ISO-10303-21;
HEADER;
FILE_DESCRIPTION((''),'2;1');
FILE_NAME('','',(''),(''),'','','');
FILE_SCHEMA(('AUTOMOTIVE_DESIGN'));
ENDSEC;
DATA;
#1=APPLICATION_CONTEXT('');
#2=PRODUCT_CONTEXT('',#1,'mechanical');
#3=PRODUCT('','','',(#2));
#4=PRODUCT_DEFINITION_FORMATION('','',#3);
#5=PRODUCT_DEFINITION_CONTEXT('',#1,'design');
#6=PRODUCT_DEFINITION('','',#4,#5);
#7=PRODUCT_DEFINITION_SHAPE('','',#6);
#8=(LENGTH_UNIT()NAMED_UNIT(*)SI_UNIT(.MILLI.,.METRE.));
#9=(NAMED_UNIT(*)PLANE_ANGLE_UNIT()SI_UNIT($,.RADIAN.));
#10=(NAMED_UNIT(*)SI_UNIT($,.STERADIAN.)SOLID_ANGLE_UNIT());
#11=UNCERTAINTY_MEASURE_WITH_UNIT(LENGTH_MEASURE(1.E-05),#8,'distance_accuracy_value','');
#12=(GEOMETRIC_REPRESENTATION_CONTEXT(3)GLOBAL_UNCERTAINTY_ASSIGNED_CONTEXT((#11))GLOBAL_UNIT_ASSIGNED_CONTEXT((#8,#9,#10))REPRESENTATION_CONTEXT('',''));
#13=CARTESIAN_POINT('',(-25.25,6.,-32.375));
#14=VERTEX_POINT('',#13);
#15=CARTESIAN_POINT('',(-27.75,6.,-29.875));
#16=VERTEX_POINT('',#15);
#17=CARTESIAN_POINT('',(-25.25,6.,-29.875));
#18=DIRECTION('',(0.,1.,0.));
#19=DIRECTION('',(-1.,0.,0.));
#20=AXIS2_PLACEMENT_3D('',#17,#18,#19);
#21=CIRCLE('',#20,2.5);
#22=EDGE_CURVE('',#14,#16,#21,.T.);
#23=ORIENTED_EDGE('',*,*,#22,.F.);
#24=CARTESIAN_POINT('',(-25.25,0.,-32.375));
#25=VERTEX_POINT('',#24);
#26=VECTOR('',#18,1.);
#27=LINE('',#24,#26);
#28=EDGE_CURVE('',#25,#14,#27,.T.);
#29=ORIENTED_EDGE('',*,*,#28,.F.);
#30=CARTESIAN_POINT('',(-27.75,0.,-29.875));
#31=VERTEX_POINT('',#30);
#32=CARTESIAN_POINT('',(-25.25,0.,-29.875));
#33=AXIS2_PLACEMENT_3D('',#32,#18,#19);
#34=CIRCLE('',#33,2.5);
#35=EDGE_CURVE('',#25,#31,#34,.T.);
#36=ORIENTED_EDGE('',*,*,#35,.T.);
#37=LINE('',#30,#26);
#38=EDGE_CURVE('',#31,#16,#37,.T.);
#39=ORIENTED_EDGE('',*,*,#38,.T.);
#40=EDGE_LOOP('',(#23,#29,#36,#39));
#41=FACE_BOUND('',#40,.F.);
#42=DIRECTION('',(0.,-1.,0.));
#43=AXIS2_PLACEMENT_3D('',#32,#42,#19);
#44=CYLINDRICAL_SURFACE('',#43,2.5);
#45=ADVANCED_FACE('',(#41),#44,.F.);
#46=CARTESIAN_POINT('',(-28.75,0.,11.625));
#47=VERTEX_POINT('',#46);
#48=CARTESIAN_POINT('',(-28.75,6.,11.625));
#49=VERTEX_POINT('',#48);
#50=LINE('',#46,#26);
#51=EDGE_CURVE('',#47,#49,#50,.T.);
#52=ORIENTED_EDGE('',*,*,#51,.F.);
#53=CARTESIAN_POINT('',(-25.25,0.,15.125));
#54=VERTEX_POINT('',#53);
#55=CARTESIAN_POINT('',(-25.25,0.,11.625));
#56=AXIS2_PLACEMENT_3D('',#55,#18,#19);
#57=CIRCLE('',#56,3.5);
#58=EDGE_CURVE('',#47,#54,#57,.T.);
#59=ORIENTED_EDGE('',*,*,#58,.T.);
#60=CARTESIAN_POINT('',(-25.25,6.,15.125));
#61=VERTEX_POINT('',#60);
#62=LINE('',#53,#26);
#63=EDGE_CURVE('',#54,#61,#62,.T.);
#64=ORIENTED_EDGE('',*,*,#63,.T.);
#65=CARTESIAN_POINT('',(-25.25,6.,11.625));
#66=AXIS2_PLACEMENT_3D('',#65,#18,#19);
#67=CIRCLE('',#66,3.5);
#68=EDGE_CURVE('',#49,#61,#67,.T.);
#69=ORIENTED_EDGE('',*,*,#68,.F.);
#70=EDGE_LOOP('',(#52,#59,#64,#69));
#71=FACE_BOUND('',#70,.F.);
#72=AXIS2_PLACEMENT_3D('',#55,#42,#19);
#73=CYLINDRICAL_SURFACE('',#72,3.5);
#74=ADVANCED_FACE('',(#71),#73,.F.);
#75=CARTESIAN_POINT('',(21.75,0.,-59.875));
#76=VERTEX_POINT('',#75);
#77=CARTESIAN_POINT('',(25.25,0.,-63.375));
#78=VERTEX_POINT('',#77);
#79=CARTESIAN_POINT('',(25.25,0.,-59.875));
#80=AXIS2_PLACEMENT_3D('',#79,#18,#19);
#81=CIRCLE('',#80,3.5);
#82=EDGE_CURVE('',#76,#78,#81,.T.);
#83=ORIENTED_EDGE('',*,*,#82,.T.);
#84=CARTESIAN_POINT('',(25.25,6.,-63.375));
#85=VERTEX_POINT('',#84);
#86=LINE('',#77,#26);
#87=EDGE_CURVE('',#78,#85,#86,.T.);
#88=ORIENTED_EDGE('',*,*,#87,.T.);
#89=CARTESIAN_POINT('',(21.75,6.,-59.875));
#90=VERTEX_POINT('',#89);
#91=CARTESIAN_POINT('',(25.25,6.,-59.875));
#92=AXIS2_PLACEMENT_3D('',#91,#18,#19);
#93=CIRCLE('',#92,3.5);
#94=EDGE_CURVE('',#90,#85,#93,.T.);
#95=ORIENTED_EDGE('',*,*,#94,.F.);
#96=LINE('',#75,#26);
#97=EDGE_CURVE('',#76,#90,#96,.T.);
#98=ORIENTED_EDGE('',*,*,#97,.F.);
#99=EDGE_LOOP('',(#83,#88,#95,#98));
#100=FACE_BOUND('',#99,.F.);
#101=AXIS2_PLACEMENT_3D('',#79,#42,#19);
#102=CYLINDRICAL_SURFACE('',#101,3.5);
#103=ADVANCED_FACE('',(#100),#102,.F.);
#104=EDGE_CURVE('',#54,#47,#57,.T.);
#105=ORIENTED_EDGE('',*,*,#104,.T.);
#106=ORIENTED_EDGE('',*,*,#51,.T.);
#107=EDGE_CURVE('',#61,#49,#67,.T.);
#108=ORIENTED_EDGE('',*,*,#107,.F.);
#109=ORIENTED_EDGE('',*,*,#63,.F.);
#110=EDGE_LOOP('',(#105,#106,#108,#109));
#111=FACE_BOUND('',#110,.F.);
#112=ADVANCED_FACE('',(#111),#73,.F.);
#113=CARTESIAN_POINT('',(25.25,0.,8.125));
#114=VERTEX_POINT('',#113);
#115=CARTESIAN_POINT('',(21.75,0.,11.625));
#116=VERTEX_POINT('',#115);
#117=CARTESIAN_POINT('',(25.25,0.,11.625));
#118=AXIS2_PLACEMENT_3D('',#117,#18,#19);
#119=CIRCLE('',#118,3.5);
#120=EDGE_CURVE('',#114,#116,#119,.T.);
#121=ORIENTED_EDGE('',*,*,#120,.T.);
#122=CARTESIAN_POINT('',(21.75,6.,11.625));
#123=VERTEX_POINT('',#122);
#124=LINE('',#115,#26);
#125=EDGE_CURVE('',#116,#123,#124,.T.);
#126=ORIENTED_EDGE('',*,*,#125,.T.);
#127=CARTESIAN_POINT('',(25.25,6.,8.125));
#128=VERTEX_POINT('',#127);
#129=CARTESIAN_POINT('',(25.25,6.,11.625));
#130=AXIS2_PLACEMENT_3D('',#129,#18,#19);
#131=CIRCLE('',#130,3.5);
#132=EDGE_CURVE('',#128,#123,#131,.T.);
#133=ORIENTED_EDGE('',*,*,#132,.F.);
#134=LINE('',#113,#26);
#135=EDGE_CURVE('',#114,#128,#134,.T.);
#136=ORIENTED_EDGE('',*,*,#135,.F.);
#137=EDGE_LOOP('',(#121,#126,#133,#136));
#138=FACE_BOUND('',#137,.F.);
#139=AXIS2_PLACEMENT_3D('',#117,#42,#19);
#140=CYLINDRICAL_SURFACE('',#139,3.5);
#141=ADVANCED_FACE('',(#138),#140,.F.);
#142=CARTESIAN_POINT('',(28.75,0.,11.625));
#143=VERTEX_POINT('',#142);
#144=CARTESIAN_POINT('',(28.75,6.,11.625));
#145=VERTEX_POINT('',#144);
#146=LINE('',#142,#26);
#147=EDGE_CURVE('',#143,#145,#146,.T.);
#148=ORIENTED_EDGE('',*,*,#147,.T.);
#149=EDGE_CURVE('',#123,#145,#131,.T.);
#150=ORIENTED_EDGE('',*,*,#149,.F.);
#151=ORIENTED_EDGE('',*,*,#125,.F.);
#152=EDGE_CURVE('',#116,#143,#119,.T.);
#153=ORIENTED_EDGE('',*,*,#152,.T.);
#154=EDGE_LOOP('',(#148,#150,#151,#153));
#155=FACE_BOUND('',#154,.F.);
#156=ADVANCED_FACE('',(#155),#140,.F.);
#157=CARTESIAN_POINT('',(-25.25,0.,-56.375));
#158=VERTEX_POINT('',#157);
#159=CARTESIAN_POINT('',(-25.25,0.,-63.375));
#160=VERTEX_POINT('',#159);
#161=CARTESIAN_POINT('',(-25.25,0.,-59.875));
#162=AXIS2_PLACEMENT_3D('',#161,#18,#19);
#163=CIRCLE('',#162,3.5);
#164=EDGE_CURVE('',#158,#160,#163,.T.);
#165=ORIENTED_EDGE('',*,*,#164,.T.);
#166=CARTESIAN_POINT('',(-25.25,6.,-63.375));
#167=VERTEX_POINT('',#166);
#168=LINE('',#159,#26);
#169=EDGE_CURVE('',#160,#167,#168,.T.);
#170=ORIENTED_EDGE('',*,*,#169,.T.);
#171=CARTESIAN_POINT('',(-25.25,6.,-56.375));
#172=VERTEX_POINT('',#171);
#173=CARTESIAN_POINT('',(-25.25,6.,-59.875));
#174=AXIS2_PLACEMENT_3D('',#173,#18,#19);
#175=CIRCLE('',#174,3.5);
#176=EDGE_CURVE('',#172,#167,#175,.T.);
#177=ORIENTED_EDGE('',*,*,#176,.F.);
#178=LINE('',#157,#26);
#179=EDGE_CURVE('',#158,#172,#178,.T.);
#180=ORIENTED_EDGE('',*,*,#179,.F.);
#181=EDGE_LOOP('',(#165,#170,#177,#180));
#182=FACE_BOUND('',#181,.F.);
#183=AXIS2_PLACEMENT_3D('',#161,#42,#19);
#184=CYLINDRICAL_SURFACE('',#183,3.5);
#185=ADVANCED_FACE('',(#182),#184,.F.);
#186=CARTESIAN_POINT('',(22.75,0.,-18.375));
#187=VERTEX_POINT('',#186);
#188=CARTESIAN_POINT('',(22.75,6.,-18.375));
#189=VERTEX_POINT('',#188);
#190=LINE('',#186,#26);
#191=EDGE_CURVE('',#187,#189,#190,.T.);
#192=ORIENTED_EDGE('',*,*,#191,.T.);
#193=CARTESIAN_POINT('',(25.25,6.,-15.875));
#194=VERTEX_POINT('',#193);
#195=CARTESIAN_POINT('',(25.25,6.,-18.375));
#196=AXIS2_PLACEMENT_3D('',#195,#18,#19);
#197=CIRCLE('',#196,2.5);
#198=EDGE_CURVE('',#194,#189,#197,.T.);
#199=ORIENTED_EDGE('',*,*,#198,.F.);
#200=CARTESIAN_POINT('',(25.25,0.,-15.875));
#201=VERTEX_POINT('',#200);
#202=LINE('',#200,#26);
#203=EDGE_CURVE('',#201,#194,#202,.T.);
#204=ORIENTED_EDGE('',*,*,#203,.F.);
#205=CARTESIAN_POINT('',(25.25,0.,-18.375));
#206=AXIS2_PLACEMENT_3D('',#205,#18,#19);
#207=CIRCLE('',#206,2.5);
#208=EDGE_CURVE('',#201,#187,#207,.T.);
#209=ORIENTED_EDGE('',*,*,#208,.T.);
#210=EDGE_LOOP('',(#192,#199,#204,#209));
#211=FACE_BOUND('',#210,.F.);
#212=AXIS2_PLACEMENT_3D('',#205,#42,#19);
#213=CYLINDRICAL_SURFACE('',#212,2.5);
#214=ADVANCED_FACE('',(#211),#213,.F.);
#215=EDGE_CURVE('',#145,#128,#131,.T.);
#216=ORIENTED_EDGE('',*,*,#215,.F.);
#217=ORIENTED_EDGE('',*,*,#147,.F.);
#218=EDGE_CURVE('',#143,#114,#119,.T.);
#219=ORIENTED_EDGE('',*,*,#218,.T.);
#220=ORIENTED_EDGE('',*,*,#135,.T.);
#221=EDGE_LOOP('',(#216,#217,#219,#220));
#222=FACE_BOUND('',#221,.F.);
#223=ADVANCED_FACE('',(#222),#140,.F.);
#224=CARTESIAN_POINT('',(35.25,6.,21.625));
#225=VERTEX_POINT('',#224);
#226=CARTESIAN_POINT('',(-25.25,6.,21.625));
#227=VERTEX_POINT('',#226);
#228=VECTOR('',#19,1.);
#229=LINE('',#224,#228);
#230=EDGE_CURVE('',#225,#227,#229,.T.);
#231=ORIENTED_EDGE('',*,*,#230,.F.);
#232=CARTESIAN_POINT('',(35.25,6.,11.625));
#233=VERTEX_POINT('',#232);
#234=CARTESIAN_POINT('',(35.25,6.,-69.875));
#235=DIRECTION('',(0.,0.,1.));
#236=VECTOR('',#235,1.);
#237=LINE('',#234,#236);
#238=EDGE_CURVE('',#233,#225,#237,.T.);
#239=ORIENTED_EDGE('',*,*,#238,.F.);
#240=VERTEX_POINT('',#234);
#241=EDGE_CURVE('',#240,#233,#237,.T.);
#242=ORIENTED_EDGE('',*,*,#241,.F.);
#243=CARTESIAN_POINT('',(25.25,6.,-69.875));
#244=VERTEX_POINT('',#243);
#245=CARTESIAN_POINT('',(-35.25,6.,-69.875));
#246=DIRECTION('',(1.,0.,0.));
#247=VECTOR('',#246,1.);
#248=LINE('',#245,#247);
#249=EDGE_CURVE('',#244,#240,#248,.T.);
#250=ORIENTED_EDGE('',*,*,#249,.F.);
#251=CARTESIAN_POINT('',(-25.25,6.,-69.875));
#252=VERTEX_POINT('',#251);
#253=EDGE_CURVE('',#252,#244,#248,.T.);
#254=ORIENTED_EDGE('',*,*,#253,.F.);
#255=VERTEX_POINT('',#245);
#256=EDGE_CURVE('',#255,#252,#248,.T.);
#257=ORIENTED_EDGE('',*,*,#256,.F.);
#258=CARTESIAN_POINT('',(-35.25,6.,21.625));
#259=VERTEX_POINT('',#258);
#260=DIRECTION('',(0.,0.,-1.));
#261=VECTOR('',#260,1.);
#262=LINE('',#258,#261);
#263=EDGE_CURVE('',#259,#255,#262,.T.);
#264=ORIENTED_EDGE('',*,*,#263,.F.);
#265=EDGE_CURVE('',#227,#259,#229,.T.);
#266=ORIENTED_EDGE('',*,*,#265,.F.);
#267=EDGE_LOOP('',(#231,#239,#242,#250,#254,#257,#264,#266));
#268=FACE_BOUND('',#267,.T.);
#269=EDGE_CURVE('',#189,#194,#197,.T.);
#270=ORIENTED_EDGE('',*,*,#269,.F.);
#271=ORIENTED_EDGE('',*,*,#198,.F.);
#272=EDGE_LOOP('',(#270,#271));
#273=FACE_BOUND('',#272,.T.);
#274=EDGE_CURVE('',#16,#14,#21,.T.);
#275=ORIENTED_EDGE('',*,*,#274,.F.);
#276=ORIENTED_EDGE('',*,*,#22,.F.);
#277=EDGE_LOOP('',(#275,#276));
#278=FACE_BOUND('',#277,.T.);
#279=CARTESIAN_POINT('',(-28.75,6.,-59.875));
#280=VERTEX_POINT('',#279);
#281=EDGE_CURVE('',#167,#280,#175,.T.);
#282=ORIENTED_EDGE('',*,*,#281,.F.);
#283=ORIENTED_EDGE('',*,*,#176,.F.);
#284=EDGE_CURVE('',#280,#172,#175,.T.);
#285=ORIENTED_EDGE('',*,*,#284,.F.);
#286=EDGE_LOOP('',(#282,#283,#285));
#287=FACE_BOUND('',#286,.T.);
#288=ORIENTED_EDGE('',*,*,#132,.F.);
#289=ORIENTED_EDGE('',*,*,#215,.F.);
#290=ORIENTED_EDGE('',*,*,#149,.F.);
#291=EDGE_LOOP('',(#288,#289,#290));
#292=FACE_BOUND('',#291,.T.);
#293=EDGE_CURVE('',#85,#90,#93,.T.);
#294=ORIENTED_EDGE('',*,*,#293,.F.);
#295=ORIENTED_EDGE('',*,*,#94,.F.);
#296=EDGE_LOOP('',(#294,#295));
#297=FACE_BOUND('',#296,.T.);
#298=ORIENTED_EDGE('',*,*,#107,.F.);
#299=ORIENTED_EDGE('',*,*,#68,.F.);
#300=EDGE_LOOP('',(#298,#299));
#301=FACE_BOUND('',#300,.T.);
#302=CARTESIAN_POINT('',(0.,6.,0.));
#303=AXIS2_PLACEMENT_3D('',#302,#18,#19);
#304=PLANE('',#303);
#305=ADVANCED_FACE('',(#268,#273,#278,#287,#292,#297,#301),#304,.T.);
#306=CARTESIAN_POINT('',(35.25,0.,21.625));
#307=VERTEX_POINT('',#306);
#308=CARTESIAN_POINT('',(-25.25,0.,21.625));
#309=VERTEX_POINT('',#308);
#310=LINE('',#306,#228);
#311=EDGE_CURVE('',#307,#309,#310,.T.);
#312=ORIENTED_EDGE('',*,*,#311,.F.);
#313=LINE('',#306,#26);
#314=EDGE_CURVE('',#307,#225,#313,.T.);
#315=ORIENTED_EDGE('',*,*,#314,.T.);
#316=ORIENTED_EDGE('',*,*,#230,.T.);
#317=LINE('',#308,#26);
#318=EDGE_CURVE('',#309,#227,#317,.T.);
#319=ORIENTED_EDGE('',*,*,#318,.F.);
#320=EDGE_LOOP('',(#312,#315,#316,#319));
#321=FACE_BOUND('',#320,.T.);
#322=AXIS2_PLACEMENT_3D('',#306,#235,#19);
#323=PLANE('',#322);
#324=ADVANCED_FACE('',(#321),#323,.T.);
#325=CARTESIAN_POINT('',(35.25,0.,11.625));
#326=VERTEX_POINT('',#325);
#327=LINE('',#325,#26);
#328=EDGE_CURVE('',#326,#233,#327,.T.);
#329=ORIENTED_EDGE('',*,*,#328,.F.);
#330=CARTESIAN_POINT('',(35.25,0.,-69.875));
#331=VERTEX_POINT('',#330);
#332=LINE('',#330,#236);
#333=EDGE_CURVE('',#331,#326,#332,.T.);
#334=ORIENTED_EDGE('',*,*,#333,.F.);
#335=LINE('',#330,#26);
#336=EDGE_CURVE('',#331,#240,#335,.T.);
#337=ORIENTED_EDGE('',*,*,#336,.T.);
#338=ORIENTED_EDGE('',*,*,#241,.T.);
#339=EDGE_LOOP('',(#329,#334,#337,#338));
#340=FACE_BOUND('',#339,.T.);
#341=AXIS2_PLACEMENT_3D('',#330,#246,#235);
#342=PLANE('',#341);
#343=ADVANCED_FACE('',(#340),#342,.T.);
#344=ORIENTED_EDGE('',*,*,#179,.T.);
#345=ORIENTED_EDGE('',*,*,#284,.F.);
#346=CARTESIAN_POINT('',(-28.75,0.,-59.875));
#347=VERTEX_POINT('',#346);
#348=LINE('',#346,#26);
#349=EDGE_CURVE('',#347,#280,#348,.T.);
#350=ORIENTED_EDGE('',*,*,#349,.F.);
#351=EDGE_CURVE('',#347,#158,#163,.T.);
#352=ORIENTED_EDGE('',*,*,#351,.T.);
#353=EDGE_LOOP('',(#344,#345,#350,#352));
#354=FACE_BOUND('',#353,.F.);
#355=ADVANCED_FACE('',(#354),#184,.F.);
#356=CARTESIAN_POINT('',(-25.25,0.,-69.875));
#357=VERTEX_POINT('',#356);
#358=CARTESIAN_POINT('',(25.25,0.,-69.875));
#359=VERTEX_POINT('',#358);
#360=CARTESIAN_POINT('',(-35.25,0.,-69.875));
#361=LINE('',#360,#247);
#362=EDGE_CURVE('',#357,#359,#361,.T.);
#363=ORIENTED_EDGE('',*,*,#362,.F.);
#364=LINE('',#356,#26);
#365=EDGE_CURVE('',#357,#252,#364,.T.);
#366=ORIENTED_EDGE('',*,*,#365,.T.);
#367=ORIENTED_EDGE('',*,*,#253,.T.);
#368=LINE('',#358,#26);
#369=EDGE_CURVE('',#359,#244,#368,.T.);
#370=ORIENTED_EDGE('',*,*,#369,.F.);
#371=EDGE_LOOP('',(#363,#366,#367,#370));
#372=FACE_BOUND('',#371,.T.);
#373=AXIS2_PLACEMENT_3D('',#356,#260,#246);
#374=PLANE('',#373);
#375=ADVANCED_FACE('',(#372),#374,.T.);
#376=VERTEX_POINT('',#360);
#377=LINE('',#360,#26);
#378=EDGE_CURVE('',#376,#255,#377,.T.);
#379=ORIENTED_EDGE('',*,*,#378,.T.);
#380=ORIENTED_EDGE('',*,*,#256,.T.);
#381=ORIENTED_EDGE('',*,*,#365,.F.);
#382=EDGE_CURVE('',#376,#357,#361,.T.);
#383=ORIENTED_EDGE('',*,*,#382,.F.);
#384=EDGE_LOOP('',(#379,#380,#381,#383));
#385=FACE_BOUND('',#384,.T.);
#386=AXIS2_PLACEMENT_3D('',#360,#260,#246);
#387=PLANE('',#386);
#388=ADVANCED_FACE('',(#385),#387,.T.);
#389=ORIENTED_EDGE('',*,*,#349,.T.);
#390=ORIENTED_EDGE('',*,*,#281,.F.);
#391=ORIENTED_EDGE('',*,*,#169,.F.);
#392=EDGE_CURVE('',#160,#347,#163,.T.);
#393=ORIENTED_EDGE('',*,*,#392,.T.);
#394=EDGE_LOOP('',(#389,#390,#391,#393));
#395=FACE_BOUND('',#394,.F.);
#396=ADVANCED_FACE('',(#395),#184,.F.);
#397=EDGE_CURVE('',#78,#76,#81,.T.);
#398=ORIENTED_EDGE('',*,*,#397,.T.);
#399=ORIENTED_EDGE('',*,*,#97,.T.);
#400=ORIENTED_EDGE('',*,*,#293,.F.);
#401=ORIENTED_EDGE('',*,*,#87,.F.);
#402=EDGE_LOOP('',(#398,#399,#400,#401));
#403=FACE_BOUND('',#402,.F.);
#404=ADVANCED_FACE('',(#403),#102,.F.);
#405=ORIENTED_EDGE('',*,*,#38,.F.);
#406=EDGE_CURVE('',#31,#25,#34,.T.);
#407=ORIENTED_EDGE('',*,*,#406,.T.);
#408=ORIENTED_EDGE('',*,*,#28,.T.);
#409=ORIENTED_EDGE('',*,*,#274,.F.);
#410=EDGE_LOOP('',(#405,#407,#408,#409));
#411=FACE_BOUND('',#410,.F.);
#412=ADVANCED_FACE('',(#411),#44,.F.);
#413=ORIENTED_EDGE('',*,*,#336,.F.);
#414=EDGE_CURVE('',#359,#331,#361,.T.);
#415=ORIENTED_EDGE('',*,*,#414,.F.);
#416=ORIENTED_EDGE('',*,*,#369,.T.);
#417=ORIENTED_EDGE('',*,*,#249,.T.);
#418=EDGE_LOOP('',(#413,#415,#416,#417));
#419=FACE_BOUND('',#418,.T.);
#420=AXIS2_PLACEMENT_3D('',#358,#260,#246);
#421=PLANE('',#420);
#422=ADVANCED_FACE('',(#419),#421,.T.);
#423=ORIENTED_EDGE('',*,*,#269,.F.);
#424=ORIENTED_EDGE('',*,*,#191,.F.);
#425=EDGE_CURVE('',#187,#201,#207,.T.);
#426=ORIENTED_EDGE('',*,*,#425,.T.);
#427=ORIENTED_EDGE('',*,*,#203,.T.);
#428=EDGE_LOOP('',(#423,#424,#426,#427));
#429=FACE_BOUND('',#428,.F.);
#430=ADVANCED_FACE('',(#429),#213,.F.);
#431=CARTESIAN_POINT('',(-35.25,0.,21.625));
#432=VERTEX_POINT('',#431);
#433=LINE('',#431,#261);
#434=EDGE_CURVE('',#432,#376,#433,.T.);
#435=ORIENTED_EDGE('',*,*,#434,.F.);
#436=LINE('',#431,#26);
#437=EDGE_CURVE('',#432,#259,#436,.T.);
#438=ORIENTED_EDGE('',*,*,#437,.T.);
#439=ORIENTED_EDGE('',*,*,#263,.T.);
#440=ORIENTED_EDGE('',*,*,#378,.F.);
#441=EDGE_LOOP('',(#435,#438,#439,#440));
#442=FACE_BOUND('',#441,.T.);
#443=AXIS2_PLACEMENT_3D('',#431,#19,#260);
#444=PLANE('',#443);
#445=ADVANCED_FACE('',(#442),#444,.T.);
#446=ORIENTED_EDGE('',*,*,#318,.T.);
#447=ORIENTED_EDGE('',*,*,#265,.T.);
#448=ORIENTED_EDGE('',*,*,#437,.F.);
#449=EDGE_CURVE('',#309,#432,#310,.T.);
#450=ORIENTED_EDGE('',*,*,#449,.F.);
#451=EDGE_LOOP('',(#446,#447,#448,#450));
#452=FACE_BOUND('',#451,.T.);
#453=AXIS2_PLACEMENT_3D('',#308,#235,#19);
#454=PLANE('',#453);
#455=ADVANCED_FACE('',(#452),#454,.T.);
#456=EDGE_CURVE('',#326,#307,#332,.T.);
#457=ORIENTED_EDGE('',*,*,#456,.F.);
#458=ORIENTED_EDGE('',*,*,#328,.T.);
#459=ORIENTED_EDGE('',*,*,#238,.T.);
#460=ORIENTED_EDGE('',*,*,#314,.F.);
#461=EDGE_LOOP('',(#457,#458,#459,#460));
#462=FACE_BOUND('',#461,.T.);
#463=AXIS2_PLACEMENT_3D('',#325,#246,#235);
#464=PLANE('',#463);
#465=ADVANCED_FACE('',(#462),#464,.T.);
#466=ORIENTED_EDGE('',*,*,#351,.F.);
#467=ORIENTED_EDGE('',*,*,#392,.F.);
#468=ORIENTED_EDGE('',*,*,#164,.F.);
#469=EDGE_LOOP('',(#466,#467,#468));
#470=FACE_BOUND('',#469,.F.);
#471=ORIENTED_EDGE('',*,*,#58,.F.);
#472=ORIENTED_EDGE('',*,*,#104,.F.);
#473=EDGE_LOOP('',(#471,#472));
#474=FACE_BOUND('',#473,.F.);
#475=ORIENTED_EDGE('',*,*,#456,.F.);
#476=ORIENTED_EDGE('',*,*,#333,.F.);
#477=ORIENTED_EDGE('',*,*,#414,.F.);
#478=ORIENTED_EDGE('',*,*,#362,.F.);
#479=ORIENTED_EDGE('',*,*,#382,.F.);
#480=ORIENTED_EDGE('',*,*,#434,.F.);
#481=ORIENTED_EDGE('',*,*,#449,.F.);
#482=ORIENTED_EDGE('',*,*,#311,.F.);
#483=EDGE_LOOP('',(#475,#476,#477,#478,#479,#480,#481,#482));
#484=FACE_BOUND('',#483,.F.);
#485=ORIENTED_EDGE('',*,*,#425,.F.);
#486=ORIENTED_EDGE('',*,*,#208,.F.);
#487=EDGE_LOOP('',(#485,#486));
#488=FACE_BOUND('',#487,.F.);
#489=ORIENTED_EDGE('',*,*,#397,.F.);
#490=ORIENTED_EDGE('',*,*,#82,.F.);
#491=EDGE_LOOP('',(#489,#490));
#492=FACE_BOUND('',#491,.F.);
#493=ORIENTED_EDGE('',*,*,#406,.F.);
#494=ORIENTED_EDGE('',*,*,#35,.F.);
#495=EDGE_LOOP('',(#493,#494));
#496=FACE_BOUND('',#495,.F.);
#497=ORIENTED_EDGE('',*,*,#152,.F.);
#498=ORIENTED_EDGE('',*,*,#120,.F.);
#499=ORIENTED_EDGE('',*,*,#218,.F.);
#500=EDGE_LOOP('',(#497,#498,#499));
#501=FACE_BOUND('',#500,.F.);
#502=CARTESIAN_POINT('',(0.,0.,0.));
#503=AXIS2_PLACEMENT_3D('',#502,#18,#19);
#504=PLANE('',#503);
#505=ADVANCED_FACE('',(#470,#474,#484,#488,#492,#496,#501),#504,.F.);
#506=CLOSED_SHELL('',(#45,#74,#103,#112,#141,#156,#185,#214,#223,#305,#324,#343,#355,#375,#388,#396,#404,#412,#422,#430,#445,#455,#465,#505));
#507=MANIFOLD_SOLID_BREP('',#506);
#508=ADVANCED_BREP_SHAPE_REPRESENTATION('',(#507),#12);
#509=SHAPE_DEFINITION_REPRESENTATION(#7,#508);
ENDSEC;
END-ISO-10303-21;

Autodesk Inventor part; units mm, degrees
ref_plane "YZ Plane" through (0, 0, 0) normal (1, 0, 0) x (0, 1, 0)
ref_plane "XZ Plane" through (0, 0, 0) normal (0, 1, 0) x (-1, 0, 0)
ref_plane "XY Plane" through (0, 0, 0) normal (0, 0, 1) x (1, 0, 0)
sketch "Sketch1" plane through (0, 0, 0) normal (0, 1, 0) x (-1, 0, 0)
  line L0 (-14, -58.75) -> (-19, -58.75)
  line L1 (-35.25, 21.625) -> (35.25, 21.625)
  line L2 (-35.25, 21.625) -> (35.25, 21.625) construction
  line L3 (35.25, 21.625) -> (25.25, 21.625)
  line L4 (-35.25, 21.625) -> (35.25, 21.625)
  line L5 (35.25, 21.625) -> (35.25, -69.875)
  line L6 (35.25, -69.875) -> (-35.25, -69.875)
  line L7 (-35.25, -69.875) -> (-35.25, 21.625)
  line L8 (-35.25, 21.625) -> (-35.25, 11.625)
  line L9 (-35.25, 11.625) -> (-25.25, 11.625)
  circle A0 centre (-25.25, 11.625) radius 3.5
  line L10 (35.25, 21.625) -> (25.25, 21.625)
  line L11 (25.25, 21.625) -> (25.25, 11.625)
  circle A1 centre (25.25, 11.625) radius 3.5
  line L12 (35.25, -69.875) -> (25.25, -69.875)
  line L13 (25.25, -69.875) -> (25.25, -59.875)
  circle A2 centre (25.25, -59.875) radius 3.5
  line L14 (-35.25, -69.875) -> (-25.25, -69.875)
  line L15 (-25.25, -69.875) -> (-25.25, -59.875)
  circle A3 centre (-25.25, -59.875) radius 3.5
  line L16 (-25.25, 11.625) -> (-25.25, -18.375)
  line L17 (25.25, -59.875) -> (25.25, -29.875)
  circle A4 centre (-25.25, -18.375) radius 2.5
  circle A5 centre (25.25, -29.875) radius 2.5
  point P0 (0, 0)
  dimension "d6" = 5
  dimension "d9" = 70.5
  dimension "d41" = 70.5
  dimension "d42" = 91.5
  dimension "d43" = 10
  dimension "d44" = 10
  dimension "d45" = 7
  dimension "d46" = 10
  dimension "d47" = 10
  dimension "d48" = 90
  dimension "d50" = 7
  dimension "d51" = 10
  dimension "d52" = 10
  dimension "d53" = 7
  dimension "d54" = 10
  dimension "d55" = 10
  dimension "d56" = 7
  dimension "d60" = 30
  dimension "d61" = 30
  dimension "d62" = 5
  dimension "d63" = 5
extrude "Extrusion1" add sketch "Sketch1" along normal blind 6
properties part number "m"
